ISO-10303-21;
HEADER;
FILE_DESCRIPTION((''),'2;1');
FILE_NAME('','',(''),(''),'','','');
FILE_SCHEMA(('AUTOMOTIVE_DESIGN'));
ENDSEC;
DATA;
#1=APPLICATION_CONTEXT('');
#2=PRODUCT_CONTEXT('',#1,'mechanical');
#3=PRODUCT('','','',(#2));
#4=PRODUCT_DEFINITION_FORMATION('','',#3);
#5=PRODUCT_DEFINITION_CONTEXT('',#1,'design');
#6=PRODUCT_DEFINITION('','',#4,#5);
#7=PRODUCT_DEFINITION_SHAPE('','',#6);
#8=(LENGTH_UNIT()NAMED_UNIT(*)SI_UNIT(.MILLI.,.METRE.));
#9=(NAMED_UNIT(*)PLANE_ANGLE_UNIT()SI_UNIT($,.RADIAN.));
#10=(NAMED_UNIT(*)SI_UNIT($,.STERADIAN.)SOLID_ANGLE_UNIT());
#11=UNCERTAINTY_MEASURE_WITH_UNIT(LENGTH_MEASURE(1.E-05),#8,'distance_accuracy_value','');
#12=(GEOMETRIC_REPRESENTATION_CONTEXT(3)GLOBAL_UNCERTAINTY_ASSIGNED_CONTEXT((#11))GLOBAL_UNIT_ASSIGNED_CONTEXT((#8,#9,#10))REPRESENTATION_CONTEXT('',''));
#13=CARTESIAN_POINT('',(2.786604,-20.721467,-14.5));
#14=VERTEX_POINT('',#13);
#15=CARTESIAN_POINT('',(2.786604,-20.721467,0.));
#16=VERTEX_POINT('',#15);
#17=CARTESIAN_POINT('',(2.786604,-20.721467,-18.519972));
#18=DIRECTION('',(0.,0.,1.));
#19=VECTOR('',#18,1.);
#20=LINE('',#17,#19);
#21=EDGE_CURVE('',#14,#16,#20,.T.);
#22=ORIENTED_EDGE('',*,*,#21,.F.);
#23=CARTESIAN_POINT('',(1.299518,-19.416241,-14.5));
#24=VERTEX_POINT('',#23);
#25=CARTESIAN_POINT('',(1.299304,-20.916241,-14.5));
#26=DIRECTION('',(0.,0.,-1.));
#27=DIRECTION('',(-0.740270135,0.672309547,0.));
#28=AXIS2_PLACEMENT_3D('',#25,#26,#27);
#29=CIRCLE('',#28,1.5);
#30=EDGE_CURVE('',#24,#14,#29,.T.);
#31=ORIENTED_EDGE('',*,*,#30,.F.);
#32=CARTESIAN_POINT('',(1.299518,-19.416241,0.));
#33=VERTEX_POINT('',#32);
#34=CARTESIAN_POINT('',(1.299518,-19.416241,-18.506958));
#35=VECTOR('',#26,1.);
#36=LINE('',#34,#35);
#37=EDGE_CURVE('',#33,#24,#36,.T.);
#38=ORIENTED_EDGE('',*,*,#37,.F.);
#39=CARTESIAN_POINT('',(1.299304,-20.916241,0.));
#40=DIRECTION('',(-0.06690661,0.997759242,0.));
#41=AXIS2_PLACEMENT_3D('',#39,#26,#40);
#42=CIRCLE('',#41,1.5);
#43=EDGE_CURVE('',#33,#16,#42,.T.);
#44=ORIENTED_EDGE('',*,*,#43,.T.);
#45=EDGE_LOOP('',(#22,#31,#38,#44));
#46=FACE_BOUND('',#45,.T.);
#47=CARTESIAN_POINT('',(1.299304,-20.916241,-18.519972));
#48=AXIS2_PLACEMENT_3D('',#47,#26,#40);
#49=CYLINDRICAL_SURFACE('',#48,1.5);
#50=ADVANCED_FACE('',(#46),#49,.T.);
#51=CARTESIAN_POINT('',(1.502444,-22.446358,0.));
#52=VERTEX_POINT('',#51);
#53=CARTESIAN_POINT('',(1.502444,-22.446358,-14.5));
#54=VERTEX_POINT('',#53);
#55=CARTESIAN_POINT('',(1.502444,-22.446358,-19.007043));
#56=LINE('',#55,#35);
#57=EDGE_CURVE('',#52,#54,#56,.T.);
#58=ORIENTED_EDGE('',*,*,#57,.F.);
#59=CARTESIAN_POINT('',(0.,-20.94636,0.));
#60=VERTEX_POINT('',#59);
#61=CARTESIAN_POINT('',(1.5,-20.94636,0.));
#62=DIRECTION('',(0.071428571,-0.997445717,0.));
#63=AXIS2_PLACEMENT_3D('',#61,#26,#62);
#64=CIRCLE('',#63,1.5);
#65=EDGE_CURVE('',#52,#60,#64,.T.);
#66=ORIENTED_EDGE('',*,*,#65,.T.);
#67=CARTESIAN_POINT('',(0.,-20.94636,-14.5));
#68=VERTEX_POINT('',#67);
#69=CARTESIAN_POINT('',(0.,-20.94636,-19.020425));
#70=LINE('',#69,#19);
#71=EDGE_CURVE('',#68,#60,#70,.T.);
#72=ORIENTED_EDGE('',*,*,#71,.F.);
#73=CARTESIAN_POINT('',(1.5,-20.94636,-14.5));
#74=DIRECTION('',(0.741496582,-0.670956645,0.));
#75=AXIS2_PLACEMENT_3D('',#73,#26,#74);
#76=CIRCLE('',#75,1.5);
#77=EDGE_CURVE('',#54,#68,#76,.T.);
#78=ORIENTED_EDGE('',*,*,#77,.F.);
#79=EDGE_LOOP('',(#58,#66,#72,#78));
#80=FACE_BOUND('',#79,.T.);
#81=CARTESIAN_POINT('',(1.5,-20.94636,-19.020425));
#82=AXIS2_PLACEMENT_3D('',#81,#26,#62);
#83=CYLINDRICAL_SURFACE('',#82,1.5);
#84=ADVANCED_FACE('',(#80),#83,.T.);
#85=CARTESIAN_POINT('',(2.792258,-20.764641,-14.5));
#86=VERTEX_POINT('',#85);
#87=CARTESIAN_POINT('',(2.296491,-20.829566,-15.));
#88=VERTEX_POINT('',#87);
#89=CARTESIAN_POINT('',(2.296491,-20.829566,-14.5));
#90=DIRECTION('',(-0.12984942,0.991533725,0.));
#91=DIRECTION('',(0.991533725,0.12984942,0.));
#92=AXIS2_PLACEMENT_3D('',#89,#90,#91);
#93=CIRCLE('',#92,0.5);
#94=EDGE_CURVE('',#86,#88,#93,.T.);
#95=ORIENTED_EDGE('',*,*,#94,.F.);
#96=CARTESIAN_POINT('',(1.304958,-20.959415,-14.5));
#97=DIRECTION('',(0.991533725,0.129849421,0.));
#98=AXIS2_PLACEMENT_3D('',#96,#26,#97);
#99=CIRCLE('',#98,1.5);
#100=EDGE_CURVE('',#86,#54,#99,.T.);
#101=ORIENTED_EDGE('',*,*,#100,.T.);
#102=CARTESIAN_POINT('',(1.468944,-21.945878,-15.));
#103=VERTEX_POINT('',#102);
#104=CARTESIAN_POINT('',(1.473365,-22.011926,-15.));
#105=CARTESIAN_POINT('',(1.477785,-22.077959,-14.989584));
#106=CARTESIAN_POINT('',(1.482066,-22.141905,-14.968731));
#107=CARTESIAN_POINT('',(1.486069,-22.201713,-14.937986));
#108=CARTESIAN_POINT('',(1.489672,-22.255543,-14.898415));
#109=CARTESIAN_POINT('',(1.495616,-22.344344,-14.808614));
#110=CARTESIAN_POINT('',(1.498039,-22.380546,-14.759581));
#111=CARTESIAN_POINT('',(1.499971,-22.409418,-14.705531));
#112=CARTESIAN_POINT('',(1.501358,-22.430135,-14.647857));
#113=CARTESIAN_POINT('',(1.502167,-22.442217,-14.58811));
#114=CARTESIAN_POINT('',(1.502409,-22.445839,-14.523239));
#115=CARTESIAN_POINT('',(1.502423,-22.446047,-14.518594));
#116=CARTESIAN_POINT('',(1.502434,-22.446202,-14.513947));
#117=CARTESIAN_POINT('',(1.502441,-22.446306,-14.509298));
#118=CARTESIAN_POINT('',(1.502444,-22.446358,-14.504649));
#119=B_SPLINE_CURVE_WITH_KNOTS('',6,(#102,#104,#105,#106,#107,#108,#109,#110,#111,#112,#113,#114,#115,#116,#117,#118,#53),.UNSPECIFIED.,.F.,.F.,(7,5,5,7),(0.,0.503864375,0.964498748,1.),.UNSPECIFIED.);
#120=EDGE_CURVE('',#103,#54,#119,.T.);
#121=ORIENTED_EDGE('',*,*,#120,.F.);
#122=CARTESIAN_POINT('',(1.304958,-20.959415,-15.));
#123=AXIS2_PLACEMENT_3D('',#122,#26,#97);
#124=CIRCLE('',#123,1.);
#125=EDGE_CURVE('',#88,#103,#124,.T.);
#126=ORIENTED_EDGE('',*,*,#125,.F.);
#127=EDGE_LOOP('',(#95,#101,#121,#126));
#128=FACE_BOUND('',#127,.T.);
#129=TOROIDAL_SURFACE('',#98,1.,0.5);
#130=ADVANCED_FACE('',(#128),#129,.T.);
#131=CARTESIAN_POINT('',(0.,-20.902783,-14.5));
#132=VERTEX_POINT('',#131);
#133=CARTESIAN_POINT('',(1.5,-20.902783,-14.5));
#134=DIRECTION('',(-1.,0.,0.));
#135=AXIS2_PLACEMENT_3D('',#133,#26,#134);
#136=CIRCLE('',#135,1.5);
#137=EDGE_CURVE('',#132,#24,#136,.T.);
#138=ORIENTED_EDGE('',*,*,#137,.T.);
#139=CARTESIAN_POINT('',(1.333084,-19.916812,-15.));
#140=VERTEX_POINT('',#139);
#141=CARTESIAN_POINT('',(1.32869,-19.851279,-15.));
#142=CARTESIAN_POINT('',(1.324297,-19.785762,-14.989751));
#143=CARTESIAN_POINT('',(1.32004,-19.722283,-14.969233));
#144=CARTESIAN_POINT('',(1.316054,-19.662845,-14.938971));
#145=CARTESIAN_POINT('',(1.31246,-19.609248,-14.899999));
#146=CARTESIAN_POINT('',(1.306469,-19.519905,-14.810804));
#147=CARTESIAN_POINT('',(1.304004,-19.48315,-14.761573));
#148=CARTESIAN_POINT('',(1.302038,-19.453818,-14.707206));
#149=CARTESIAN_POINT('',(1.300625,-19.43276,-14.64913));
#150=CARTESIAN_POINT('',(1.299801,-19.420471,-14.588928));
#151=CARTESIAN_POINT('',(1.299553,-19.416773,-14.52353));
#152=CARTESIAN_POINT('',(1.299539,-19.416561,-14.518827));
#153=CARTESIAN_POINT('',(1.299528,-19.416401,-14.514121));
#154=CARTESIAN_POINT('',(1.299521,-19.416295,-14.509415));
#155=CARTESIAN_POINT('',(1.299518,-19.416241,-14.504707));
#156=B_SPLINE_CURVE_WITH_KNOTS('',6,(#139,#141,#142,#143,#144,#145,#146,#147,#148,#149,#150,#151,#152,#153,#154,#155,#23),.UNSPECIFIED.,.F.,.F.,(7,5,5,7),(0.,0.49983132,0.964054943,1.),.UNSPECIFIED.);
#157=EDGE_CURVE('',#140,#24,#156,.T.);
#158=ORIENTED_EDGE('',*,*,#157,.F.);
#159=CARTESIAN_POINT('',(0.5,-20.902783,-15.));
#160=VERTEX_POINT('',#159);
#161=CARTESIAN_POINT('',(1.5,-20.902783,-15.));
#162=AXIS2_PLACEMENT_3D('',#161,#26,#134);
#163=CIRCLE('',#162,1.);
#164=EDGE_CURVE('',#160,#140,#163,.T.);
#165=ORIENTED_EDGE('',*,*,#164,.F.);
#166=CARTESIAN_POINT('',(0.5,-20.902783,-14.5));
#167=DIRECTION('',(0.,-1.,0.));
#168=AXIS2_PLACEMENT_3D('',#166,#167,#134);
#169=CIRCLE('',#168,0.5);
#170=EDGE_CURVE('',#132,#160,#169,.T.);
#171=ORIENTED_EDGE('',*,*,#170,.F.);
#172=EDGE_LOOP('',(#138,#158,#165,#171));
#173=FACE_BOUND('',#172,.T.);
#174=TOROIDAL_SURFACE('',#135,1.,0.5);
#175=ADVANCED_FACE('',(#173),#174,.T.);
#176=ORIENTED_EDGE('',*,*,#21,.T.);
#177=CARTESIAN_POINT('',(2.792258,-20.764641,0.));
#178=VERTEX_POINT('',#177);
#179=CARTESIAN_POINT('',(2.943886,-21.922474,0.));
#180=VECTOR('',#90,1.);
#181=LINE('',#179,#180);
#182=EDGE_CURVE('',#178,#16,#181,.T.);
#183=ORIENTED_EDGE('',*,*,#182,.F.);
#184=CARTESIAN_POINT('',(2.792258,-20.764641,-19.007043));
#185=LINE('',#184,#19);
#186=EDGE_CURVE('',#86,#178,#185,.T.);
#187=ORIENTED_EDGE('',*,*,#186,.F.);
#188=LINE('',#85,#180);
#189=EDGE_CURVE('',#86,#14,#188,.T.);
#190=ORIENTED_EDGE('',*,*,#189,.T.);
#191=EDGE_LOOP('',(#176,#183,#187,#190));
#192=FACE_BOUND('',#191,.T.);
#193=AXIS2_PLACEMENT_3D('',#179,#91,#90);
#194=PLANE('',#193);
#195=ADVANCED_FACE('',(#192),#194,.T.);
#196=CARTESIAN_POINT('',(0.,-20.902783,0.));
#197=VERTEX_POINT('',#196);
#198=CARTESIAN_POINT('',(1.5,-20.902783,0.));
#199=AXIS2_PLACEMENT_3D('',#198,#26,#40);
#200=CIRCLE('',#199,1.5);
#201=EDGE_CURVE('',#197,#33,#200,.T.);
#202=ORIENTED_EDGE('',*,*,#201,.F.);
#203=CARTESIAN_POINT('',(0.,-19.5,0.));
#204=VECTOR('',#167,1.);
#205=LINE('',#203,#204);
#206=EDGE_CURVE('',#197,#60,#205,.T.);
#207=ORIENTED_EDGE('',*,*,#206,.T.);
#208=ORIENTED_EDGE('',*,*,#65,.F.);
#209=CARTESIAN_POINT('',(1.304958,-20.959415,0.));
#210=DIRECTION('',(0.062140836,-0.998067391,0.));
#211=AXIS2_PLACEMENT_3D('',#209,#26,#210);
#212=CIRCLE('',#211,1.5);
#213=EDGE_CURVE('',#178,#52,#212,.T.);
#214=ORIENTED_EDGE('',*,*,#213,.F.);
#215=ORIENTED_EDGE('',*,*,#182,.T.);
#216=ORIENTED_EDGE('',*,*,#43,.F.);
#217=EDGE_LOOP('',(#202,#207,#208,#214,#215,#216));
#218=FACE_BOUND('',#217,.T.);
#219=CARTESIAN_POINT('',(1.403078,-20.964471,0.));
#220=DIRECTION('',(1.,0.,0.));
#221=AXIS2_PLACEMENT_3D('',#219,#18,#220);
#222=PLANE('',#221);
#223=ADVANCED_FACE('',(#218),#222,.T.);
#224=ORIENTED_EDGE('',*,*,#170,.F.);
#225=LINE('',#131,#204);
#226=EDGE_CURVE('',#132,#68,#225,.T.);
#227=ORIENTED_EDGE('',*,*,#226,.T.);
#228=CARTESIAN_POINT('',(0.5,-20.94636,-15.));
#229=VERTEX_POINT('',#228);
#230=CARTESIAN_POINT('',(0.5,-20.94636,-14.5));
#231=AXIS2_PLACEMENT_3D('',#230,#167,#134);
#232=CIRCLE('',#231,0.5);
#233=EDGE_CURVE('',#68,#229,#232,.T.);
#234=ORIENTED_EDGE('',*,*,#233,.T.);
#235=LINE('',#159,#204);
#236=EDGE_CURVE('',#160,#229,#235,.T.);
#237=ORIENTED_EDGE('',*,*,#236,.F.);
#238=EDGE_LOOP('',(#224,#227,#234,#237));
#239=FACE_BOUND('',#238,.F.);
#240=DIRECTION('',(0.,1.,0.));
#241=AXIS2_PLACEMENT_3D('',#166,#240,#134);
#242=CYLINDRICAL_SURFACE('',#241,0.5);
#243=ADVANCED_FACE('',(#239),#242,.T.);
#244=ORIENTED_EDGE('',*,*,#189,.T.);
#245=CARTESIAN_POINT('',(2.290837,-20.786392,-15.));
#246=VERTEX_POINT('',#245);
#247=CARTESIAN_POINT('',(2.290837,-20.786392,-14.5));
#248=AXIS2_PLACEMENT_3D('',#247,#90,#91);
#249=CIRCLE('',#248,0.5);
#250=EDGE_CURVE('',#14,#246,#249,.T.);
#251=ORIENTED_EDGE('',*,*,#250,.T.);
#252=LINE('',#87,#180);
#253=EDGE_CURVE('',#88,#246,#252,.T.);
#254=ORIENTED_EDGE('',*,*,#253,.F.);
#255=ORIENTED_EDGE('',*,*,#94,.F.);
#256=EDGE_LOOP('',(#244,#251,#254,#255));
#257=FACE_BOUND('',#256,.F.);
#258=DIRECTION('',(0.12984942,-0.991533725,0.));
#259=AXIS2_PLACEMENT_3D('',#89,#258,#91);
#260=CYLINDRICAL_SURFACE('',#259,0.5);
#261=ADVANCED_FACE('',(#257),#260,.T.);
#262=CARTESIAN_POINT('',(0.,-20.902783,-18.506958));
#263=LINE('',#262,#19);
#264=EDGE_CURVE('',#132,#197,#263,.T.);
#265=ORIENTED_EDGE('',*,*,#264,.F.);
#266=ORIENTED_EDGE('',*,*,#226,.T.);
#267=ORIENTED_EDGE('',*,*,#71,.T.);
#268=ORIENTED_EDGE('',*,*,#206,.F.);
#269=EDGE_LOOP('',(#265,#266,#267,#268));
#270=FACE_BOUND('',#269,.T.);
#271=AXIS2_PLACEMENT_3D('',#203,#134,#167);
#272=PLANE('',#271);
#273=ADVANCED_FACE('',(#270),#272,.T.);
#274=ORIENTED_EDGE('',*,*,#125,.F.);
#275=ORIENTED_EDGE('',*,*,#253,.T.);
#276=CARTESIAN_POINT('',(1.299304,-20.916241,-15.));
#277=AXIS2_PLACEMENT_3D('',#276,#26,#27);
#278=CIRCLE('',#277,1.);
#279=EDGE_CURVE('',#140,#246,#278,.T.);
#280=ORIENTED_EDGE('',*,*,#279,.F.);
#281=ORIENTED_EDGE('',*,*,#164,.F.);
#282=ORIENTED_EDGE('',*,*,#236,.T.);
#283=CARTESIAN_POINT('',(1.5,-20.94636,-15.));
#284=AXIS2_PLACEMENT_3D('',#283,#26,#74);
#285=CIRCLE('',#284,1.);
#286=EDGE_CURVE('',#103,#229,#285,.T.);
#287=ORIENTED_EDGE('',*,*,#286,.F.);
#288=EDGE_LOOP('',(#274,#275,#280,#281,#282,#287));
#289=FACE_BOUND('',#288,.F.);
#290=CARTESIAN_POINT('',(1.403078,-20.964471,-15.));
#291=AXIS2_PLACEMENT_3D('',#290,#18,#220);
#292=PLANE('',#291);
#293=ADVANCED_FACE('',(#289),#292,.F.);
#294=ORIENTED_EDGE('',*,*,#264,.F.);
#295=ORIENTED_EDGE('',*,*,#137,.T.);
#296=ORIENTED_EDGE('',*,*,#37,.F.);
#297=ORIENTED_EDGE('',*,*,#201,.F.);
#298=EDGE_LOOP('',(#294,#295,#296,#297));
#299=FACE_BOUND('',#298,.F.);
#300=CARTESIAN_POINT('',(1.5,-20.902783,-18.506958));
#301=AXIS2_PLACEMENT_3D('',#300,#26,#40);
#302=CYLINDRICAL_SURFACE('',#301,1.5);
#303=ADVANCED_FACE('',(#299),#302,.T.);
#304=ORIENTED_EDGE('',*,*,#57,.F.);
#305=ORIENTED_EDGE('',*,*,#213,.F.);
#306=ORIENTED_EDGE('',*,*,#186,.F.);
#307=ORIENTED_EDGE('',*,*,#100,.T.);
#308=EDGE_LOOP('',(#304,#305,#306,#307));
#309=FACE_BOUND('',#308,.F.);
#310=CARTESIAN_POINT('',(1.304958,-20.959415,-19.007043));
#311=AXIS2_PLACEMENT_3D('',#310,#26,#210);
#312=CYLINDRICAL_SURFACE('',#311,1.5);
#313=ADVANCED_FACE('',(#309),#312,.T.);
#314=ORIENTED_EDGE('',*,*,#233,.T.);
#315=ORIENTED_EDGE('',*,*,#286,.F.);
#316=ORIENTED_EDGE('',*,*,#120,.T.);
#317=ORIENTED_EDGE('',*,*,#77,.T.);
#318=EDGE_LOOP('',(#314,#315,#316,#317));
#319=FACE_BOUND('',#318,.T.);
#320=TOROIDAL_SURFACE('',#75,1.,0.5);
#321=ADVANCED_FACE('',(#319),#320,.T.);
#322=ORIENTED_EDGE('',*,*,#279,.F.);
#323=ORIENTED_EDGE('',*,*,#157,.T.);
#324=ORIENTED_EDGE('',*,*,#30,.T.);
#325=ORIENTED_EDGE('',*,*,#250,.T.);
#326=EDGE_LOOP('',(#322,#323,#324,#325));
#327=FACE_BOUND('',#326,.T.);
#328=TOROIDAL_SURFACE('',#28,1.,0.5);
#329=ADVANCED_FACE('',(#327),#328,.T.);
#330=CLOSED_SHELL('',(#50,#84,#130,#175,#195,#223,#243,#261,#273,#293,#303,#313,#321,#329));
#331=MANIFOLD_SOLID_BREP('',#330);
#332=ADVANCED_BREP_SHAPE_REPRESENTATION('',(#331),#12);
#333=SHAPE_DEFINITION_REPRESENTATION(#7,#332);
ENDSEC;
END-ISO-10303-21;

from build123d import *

# Parameters (mm, degrees)
F1_DEPTH     = 15
F2_T1_DEPTH  = 23.0140868267
F2_T3_DEPTH  = 23.0408505773
F2_T5_DEPTH  = 22.0139169115
F2_T7_DEPTH  = 22.0399446
F3_T1_DEPTH  = 0.0435766834
F3_T3_DEPTH  = 0.0435423936
F3_T6_ANGLE  = 137.6611177832
F3_T8_ANGLE  = 137.8590578992
F3_T10_ANGLE = 130.081684858
F3_T12_ANGLE = 130.2935410412


# Not quite as in the source:
# - a fillet or chamfer that OpenCascade refuses, or shapes differently, is made with other operations: its cross-section is extruded or revolved along the edge and cut away or added


with BuildPart() as f1:
    # F0 (on Top) → F1 (new body)
    with BuildSketch(Plane.XY):
        with BuildLine():
            Line((0, -19.5), (0, -22.5))
            ThreePointArc((0, -22.5), (1.5, -22.4499443206), (2.9933259094, -22.3))
            Line((2.9933259094, -22.3), (2.9438857713, -21.9224737536))
            Line((2.9438857713, -21.9224737536), (2.6037776482, -19.3253988247))
            Line((2.6037776482, -19.3253988247), (0, -19.5))
        make_face()
    extrude(amount=-F1_DEPTH)

    # F2: fillet of radius 1.5 on 4 edges, made by hand

    # F2_s2 → F2_t1 (cut)
    with BuildSketch(Plane.XY.offset(-19.0070434133)):
        with BuildLine():
            ThreePointArc((1.3981688146, -22.4565162918), (2.4625908606, -21.9132942034), (2.792258148, -20.7646410751))
            Line((2.792258148, -20.7646410751), (2.9933259094, -22.3))
            ThreePointArc((2.9933259094, -22.3), (2.1971415101, -22.3924667954), (1.3981688146, -22.4565162918))
        make_face()
    extrude(amount=F2_T1_DEPTH, mode=Mode.SUBTRACT)

    # F2_s4 → F2_t3 (cut)
    with BuildSketch(Plane.XY.offset(-19.0204252887)):
        with BuildLine():
            ThreePointArc((1.6071428571, -22.4425286418), (0.4779222842, -22.0442476477), (0, -20.9463600657))
            Line((0, -20.9463600657), (0, -22.5))
            ThreePointArc((0, -22.5), (0.8040850577, -22.4856275701), (1.6071428571, -22.4425286418))
        make_face()
    extrude(amount=F2_T3_DEPTH, mode=Mode.SUBTRACT)

    # F2_s6 → F2_t5 (cut)
    with BuildSketch(Plane.XY.offset(-18.5069584558)):
        with BuildLine():
            ThreePointArc((1.3996400846, -19.4061445189), (0.4044316833, -19.8782200297), (0, -20.9027833823))
            Line((0, -20.9027833823), (0, -19.5))
            Line((0, -19.5), (1.3996400846, -19.4061445189))
        make_face()
    extrude(amount=F2_T5_DEPTH, mode=Mode.SUBTRACT)

    # F2_s8 → F2_t7 (cut)
    with BuildSketch(Plane.XY.offset(-18.5199723)):
        with BuildLine():
            ThreePointArc((1.1989436903, -19.4196025906), (2.2504156143, -19.7563337218), (2.7866041934, -20.7214673234))
            Line((2.7866041934, -20.7214673234), (2.6037776482, -19.3253988247))
            Line((2.6037776482, -19.3253988247), (1.1989436903, -19.4196025906))
        make_face()
    extrude(amount=F2_T7_DEPTH, mode=Mode.SUBTRACT)

    # F3: fillet of radius 0.5 on 6 edges, made by hand

    # F3_s2 → F3_t1 (cut)
    with BuildSketch(Plane.XZ.offset(20.9027833823)):
        with BuildLine():
            ThreePointArc((0, -14.5), (0.1464466094, -14.8535533906), (0.5, -15))
            Line((0.5, -15), (0, -15))
            Line((0, -15), (0, -14.5))
        make_face()
    extrude(amount=F3_T1_DEPTH, mode=Mode.SUBTRACT)

    # F3_s4 → F3_t3 (cut)
    with BuildSketch(Plane(origin=(2.7205290964, -20.7740345789, 0), x_dir=(0, 0, 1), z_dir=(-0.1298494204, 0.9915337251, 0))):
        with BuildLine():
            ThreePointArc((-14.5, 0.0723415147), (-14.8535533906, -0.0741050947), (-15, -0.4276584853))
            Line((-15, -0.4276584853), (-15, 0.0723415147))
            Line((-15, 0.0723415147), (-14.5, 0.0723415147))
        make_face()
    extrude(amount=F3_T3_DEPTH, mode=Mode.SUBTRACT)

    # F3_s5 → F3_t6 (revolve, cut)
    with BuildSketch(Plane(origin=(2.7205290981, -20.7740345786, 0), x_dir=(0, 0, 1), z_dir=(-0.1298494205, 0.9915337251, 0))):
        with BuildLine():
            ThreePointArc((-14.5, 0.072341513), (-14.8535533906, -0.0741050964), (-15, -0.427658487))
            Line((-15, -0.427658487), (-15, 0.072341513))
            Line((-15, 0.072341513), (-14.5, 0.072341513))
        make_face()
    revolve(axis=Axis((1.3049575605, -20.9594152058, -15), (0, 0, -1)), revolution_arc=F3_T6_ANGLE, mode=Mode.SUBTRACT)

    # F3_s7 → F3_t8 (revolve, cut)
    with BuildSketch(Plane(origin=(-9.7457924884, -10.7704005546, 0), x_dir=(0, 0, 1), z_dir=(0.6709566447, 0.7414965819, 0))):
        with BuildLine():
            ThreePointArc((-14.5, 16.6663443409), (-14.8535533906, 16.5198977315), (-15, 16.1663443409))
            Line((-15, 16.1663443409), (-15, 16.6663443409))
            Line((-15, 16.6663443409), (-14.5, 16.6663443409))
        make_face()
    revolve(axis=Axis((1.5000000001, -20.9463600656, -15), (0, 0, -1)), revolution_arc=F3_T8_ANGLE, mode=Mode.SUBTRACT)

    # F3_s9 → F3_t10 (revolve, cut)
    with BuildSketch(Plane.XZ.offset(20.9027833823)):
        with BuildLine():
            ThreePointArc((0, -14.5), (0.1464466094, -14.8535533906), (0.5, -15))
            Line((0.5, -15), (0, -15))
            Line((0, -15), (0, -14.5))
        make_face()
    revolve(axis=Axis((1.5, -20.9027833823, -15), (0, 0, -1)), revolution_arc=F3_T10_ANGLE, mode=Mode.SUBTRACT)

    # F3_s11 → F3_t12 (revolve, cut)
    with BuildSketch(Plane(origin=(-9.8225330213, -10.8154463672, 0), x_dir=(0, 0, 1), z_dir=(-0.672309547, -0.7402701352, 0))):
        with BuildLine():
            ThreePointArc((-14.5, -13.5240244723), (-14.8535533906, -13.6704710817), (-15, -14.0240244723))
            Line((-15, -14.0240244723), (-15, -13.5240244723))
            Line((-15, -13.5240244723), (-14.5, -13.5240244723))
        make_face()
    revolve(axis=Axis((1.2993036057, -20.916241454, -15), (0, 0, -1)), revolution_arc=F3_T12_ANGLE, mode=Mode.SUBTRACT)


solid = f1.part
